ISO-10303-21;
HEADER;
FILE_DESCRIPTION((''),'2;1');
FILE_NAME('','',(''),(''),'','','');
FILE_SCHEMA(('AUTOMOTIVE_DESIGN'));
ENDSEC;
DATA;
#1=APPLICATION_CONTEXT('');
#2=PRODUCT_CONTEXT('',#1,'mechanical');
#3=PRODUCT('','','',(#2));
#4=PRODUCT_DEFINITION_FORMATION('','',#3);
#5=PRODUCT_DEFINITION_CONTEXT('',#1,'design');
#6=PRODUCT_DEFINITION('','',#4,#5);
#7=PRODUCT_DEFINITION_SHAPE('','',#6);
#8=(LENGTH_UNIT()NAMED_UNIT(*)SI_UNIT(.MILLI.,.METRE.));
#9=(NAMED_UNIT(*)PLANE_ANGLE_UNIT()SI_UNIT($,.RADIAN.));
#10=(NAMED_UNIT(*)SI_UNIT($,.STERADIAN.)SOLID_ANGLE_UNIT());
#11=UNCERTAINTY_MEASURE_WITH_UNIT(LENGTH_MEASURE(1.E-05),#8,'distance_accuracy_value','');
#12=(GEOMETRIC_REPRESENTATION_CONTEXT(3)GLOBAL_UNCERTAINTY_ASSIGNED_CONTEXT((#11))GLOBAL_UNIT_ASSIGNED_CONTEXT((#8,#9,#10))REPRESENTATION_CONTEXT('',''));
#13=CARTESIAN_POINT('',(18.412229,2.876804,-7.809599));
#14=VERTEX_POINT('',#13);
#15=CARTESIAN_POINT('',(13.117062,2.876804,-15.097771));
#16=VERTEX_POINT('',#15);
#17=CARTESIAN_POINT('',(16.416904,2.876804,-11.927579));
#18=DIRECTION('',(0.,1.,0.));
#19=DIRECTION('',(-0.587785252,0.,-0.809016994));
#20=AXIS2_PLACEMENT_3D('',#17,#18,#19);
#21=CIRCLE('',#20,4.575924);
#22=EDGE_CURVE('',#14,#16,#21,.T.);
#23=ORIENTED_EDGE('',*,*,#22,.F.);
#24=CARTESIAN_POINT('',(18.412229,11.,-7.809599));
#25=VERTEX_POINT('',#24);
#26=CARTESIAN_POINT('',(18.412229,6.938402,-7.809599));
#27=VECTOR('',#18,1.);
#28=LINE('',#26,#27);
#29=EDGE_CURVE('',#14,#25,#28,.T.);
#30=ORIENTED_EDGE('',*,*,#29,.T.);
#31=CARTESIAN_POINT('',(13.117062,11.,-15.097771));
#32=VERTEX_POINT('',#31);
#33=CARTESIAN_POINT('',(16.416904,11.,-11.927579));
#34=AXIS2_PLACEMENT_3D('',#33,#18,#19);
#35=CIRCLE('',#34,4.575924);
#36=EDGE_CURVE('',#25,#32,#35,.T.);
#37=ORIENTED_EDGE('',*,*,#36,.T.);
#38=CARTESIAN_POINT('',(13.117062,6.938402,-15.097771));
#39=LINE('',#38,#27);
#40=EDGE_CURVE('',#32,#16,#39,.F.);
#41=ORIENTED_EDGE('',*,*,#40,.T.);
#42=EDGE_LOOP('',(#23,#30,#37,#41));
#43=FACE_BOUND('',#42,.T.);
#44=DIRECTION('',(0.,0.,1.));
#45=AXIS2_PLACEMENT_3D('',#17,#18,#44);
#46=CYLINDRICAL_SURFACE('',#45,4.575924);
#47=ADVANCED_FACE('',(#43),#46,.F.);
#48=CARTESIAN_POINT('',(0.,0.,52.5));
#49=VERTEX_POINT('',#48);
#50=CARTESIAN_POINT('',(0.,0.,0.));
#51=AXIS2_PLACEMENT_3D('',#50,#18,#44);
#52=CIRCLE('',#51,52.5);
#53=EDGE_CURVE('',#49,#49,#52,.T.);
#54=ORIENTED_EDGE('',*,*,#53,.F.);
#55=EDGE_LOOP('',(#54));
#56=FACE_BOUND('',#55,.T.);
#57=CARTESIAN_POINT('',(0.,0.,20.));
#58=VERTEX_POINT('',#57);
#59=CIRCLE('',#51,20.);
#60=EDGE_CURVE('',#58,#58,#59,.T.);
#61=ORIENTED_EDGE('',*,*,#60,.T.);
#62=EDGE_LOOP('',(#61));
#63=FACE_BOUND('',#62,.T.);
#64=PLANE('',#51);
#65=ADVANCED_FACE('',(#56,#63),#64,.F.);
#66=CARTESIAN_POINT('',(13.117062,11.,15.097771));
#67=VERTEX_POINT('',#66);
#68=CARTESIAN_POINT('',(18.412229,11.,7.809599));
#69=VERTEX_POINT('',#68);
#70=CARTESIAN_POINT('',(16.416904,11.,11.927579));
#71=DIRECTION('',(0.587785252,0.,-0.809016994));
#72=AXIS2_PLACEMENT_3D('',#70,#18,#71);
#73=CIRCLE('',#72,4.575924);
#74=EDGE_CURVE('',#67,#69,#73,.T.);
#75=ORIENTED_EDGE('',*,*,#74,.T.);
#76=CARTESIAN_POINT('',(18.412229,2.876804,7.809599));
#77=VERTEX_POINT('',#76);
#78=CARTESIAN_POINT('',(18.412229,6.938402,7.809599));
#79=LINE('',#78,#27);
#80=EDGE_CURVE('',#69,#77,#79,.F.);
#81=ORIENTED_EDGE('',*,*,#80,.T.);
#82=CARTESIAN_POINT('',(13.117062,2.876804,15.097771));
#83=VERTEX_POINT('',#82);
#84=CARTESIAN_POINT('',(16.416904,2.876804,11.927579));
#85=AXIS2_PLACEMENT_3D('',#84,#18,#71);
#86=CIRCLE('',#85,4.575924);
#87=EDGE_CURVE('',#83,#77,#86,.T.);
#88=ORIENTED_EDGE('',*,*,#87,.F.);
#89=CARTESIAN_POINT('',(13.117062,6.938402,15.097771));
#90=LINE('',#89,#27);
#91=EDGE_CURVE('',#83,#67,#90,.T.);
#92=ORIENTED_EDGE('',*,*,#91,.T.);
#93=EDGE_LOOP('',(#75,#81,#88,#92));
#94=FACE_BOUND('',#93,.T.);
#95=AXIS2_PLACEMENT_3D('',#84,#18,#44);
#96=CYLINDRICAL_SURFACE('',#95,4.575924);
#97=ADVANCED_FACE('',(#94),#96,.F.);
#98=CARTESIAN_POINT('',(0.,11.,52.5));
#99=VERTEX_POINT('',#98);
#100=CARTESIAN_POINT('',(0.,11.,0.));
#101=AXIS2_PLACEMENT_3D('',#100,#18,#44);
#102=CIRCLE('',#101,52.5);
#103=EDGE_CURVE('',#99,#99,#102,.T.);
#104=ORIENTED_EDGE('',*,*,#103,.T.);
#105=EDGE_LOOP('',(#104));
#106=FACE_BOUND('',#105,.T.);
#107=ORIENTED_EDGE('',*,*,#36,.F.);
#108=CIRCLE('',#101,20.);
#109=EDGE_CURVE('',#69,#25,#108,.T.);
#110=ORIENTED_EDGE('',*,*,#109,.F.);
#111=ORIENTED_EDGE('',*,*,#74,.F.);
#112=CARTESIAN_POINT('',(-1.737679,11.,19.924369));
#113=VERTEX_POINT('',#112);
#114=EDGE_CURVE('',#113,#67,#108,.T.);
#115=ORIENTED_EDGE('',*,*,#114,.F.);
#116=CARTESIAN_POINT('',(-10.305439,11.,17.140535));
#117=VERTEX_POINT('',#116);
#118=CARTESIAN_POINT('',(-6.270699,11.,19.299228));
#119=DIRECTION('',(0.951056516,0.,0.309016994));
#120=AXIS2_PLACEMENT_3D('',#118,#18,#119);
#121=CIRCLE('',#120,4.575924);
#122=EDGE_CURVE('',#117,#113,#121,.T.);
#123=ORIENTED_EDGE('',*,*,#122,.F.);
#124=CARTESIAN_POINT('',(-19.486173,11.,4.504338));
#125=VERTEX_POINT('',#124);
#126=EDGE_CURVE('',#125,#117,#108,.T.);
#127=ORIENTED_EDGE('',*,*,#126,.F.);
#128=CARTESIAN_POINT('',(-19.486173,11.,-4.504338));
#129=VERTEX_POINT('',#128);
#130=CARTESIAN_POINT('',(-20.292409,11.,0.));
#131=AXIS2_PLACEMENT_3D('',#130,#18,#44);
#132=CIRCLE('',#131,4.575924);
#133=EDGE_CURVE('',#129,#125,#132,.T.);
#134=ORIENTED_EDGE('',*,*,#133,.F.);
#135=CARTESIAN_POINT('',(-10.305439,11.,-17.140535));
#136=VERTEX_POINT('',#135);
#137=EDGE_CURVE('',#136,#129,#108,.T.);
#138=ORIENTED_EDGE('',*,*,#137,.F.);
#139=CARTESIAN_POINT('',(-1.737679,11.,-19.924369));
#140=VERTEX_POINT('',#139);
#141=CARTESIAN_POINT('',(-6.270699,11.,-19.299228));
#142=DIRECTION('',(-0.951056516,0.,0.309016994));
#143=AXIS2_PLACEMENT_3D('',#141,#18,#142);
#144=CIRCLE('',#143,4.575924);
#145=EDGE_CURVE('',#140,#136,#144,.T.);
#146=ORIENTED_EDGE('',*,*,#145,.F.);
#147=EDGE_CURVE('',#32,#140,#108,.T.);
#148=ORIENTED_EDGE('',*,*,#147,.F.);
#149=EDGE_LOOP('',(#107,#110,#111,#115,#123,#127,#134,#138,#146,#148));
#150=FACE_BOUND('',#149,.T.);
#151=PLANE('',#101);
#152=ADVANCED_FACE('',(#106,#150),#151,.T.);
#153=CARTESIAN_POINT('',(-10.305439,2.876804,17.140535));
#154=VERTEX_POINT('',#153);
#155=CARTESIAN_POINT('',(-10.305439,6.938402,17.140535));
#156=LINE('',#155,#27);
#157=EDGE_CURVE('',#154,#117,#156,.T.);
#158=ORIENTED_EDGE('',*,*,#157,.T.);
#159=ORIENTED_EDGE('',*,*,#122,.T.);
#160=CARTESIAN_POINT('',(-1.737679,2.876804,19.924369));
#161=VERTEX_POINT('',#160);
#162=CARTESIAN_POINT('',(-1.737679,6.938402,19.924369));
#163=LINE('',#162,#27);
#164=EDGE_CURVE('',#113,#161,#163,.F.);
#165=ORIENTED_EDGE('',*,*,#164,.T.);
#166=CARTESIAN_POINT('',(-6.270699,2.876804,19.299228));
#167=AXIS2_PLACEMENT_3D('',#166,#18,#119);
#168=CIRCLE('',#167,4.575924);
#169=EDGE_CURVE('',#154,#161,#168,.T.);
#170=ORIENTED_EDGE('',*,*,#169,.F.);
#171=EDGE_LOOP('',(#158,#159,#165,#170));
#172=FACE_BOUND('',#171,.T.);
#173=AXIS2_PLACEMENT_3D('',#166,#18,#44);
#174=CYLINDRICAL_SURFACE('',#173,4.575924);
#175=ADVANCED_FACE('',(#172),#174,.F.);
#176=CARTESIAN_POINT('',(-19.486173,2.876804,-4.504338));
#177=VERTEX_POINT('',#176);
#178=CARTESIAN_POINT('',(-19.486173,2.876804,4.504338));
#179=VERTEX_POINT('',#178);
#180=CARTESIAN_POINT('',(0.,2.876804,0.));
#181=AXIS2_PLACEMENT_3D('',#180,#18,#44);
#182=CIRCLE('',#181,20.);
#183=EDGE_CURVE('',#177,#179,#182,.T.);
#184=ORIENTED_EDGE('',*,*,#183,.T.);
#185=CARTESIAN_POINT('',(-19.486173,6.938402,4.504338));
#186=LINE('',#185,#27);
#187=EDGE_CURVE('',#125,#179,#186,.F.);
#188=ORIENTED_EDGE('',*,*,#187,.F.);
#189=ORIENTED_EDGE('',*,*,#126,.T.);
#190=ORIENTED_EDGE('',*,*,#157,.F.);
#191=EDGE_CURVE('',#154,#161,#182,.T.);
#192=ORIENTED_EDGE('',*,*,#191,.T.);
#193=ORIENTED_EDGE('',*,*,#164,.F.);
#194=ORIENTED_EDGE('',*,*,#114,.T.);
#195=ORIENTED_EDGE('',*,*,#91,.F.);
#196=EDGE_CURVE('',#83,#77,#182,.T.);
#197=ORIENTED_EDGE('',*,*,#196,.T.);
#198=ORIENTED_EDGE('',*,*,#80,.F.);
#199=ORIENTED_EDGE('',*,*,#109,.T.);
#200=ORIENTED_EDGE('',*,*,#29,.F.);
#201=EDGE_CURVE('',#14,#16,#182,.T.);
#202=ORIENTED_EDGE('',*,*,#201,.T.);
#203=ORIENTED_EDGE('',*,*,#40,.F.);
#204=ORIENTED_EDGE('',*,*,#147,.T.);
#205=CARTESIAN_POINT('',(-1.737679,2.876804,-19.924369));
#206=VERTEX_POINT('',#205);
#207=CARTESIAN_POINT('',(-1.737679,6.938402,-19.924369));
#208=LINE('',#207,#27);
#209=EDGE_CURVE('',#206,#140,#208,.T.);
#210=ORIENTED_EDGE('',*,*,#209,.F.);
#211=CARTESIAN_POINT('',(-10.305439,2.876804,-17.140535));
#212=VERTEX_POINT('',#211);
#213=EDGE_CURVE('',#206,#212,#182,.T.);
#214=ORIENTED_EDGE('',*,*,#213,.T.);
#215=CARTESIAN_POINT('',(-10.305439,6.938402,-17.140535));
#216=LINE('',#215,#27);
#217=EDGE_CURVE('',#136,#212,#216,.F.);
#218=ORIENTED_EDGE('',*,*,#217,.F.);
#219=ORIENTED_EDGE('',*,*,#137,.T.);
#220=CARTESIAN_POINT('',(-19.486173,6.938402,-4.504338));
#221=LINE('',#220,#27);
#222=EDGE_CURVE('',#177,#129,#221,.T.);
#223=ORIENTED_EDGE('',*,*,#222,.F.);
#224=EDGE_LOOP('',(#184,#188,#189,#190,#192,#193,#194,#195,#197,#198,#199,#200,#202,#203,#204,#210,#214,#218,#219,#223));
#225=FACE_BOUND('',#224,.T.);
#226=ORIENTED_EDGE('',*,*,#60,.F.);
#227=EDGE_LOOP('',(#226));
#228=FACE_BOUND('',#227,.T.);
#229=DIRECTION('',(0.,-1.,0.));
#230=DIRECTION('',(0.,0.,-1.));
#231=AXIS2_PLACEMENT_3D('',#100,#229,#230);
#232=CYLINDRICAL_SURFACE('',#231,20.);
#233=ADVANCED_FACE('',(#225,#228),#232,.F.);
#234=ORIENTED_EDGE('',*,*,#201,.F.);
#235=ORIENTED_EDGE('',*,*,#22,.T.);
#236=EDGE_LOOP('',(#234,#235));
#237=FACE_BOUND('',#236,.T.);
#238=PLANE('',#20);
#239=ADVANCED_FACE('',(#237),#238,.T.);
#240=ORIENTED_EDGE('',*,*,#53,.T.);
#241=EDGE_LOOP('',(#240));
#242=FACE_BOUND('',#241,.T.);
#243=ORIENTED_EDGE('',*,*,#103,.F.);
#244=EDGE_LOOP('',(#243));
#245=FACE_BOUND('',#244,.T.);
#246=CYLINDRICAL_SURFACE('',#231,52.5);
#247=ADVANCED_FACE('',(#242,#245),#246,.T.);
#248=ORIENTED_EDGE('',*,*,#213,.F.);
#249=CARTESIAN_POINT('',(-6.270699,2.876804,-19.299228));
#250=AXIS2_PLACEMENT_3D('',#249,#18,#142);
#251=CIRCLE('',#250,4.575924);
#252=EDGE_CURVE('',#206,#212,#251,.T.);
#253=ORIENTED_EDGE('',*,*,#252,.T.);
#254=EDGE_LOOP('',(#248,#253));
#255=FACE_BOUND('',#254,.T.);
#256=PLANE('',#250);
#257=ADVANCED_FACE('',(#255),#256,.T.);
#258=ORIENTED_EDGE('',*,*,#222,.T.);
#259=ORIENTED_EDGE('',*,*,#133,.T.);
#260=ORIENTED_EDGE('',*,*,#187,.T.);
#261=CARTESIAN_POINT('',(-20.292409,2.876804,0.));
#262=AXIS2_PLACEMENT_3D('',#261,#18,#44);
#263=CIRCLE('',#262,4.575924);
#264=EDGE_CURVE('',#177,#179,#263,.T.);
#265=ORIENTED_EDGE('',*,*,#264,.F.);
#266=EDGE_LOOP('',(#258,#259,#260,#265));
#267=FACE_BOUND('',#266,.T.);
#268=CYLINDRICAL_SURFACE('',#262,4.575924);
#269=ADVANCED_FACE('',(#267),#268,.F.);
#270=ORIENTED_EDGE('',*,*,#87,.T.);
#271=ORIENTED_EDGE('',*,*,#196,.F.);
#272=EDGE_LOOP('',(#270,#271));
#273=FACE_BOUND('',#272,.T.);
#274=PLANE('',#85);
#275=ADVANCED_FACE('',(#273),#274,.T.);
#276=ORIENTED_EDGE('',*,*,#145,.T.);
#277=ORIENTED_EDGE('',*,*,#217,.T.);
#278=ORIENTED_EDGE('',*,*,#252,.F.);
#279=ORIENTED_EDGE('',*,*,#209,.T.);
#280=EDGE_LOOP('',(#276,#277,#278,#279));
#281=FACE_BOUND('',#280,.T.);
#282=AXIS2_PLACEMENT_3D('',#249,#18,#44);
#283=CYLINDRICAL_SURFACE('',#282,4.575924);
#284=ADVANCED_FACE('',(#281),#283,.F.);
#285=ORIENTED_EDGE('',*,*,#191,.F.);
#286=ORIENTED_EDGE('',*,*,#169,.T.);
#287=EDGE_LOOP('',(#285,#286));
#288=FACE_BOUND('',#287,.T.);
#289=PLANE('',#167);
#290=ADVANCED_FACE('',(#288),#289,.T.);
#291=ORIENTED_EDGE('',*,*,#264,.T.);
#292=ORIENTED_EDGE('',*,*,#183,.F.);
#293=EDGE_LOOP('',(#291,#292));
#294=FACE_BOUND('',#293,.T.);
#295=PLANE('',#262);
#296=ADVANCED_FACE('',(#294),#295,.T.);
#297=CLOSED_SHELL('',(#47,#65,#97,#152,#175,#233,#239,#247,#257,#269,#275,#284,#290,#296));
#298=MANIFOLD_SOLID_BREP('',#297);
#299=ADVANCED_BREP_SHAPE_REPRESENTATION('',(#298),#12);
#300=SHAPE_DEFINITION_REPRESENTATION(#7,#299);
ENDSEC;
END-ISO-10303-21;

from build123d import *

# Parameters (mm, degrees)
SKETCH1_R           = 52.5
BOSS_EXTRUDE1_DEPTH = 11
SKETCH2_R           = 20
CUT_EXTRUDE1_DEPTH  = 76.056645275
SKETCH3_R           = 4.575923698
CUT_EXTRUDE2_DEPTH  = 8.123196128
CIRPATTERN1_COUNT   = 5


with BuildPart() as part:
    # Sketch1 → Boss-Extrude1 (new body)
    with BuildSketch(Plane(origin=(0, 0, 0), x_dir=(1, 0, 0), z_dir=(0, 1, 0))):
        Circle(SKETCH1_R)
    extrude(amount=BOSS_EXTRUDE1_DEPTH)

    # Sketch2 → Cut-Extrude1 (cut, through all)
    with BuildSketch(Plane(origin=(0, 0, 0), x_dir=(1, 0, 0), z_dir=(0, 1, 0))):
        Circle(SKETCH2_R)
    extrude(amount=CUT_EXTRUDE1_DEPTH, mode=Mode.SUBTRACT)

    # Sketch3 → Cut-Extrude2 (cut)
    with BuildSketch(Plane(origin=(0, 11, 0), x_dir=(1, 0, 0), z_dir=(0, 1, 0))):
        with Locations((-20.292409218, 0)):
            Circle(SKETCH3_R)
    cut_extrude2 = extrude(amount=-CUT_EXTRUDE2_DEPTH, mode=Mode.SUBTRACT)

    # CirPattern1: Cut-Extrude2 ×5 about axis
    cirpattern1_axis = Axis((0, 0, 0), (0, 1, 0))
    for i in range(1, CIRPATTERN1_COUNT):
        add(cut_extrude2.rotate(cirpattern1_axis, i * 360 / CIRPATTERN1_COUNT), mode=Mode.SUBTRACT)


solid = part.part
